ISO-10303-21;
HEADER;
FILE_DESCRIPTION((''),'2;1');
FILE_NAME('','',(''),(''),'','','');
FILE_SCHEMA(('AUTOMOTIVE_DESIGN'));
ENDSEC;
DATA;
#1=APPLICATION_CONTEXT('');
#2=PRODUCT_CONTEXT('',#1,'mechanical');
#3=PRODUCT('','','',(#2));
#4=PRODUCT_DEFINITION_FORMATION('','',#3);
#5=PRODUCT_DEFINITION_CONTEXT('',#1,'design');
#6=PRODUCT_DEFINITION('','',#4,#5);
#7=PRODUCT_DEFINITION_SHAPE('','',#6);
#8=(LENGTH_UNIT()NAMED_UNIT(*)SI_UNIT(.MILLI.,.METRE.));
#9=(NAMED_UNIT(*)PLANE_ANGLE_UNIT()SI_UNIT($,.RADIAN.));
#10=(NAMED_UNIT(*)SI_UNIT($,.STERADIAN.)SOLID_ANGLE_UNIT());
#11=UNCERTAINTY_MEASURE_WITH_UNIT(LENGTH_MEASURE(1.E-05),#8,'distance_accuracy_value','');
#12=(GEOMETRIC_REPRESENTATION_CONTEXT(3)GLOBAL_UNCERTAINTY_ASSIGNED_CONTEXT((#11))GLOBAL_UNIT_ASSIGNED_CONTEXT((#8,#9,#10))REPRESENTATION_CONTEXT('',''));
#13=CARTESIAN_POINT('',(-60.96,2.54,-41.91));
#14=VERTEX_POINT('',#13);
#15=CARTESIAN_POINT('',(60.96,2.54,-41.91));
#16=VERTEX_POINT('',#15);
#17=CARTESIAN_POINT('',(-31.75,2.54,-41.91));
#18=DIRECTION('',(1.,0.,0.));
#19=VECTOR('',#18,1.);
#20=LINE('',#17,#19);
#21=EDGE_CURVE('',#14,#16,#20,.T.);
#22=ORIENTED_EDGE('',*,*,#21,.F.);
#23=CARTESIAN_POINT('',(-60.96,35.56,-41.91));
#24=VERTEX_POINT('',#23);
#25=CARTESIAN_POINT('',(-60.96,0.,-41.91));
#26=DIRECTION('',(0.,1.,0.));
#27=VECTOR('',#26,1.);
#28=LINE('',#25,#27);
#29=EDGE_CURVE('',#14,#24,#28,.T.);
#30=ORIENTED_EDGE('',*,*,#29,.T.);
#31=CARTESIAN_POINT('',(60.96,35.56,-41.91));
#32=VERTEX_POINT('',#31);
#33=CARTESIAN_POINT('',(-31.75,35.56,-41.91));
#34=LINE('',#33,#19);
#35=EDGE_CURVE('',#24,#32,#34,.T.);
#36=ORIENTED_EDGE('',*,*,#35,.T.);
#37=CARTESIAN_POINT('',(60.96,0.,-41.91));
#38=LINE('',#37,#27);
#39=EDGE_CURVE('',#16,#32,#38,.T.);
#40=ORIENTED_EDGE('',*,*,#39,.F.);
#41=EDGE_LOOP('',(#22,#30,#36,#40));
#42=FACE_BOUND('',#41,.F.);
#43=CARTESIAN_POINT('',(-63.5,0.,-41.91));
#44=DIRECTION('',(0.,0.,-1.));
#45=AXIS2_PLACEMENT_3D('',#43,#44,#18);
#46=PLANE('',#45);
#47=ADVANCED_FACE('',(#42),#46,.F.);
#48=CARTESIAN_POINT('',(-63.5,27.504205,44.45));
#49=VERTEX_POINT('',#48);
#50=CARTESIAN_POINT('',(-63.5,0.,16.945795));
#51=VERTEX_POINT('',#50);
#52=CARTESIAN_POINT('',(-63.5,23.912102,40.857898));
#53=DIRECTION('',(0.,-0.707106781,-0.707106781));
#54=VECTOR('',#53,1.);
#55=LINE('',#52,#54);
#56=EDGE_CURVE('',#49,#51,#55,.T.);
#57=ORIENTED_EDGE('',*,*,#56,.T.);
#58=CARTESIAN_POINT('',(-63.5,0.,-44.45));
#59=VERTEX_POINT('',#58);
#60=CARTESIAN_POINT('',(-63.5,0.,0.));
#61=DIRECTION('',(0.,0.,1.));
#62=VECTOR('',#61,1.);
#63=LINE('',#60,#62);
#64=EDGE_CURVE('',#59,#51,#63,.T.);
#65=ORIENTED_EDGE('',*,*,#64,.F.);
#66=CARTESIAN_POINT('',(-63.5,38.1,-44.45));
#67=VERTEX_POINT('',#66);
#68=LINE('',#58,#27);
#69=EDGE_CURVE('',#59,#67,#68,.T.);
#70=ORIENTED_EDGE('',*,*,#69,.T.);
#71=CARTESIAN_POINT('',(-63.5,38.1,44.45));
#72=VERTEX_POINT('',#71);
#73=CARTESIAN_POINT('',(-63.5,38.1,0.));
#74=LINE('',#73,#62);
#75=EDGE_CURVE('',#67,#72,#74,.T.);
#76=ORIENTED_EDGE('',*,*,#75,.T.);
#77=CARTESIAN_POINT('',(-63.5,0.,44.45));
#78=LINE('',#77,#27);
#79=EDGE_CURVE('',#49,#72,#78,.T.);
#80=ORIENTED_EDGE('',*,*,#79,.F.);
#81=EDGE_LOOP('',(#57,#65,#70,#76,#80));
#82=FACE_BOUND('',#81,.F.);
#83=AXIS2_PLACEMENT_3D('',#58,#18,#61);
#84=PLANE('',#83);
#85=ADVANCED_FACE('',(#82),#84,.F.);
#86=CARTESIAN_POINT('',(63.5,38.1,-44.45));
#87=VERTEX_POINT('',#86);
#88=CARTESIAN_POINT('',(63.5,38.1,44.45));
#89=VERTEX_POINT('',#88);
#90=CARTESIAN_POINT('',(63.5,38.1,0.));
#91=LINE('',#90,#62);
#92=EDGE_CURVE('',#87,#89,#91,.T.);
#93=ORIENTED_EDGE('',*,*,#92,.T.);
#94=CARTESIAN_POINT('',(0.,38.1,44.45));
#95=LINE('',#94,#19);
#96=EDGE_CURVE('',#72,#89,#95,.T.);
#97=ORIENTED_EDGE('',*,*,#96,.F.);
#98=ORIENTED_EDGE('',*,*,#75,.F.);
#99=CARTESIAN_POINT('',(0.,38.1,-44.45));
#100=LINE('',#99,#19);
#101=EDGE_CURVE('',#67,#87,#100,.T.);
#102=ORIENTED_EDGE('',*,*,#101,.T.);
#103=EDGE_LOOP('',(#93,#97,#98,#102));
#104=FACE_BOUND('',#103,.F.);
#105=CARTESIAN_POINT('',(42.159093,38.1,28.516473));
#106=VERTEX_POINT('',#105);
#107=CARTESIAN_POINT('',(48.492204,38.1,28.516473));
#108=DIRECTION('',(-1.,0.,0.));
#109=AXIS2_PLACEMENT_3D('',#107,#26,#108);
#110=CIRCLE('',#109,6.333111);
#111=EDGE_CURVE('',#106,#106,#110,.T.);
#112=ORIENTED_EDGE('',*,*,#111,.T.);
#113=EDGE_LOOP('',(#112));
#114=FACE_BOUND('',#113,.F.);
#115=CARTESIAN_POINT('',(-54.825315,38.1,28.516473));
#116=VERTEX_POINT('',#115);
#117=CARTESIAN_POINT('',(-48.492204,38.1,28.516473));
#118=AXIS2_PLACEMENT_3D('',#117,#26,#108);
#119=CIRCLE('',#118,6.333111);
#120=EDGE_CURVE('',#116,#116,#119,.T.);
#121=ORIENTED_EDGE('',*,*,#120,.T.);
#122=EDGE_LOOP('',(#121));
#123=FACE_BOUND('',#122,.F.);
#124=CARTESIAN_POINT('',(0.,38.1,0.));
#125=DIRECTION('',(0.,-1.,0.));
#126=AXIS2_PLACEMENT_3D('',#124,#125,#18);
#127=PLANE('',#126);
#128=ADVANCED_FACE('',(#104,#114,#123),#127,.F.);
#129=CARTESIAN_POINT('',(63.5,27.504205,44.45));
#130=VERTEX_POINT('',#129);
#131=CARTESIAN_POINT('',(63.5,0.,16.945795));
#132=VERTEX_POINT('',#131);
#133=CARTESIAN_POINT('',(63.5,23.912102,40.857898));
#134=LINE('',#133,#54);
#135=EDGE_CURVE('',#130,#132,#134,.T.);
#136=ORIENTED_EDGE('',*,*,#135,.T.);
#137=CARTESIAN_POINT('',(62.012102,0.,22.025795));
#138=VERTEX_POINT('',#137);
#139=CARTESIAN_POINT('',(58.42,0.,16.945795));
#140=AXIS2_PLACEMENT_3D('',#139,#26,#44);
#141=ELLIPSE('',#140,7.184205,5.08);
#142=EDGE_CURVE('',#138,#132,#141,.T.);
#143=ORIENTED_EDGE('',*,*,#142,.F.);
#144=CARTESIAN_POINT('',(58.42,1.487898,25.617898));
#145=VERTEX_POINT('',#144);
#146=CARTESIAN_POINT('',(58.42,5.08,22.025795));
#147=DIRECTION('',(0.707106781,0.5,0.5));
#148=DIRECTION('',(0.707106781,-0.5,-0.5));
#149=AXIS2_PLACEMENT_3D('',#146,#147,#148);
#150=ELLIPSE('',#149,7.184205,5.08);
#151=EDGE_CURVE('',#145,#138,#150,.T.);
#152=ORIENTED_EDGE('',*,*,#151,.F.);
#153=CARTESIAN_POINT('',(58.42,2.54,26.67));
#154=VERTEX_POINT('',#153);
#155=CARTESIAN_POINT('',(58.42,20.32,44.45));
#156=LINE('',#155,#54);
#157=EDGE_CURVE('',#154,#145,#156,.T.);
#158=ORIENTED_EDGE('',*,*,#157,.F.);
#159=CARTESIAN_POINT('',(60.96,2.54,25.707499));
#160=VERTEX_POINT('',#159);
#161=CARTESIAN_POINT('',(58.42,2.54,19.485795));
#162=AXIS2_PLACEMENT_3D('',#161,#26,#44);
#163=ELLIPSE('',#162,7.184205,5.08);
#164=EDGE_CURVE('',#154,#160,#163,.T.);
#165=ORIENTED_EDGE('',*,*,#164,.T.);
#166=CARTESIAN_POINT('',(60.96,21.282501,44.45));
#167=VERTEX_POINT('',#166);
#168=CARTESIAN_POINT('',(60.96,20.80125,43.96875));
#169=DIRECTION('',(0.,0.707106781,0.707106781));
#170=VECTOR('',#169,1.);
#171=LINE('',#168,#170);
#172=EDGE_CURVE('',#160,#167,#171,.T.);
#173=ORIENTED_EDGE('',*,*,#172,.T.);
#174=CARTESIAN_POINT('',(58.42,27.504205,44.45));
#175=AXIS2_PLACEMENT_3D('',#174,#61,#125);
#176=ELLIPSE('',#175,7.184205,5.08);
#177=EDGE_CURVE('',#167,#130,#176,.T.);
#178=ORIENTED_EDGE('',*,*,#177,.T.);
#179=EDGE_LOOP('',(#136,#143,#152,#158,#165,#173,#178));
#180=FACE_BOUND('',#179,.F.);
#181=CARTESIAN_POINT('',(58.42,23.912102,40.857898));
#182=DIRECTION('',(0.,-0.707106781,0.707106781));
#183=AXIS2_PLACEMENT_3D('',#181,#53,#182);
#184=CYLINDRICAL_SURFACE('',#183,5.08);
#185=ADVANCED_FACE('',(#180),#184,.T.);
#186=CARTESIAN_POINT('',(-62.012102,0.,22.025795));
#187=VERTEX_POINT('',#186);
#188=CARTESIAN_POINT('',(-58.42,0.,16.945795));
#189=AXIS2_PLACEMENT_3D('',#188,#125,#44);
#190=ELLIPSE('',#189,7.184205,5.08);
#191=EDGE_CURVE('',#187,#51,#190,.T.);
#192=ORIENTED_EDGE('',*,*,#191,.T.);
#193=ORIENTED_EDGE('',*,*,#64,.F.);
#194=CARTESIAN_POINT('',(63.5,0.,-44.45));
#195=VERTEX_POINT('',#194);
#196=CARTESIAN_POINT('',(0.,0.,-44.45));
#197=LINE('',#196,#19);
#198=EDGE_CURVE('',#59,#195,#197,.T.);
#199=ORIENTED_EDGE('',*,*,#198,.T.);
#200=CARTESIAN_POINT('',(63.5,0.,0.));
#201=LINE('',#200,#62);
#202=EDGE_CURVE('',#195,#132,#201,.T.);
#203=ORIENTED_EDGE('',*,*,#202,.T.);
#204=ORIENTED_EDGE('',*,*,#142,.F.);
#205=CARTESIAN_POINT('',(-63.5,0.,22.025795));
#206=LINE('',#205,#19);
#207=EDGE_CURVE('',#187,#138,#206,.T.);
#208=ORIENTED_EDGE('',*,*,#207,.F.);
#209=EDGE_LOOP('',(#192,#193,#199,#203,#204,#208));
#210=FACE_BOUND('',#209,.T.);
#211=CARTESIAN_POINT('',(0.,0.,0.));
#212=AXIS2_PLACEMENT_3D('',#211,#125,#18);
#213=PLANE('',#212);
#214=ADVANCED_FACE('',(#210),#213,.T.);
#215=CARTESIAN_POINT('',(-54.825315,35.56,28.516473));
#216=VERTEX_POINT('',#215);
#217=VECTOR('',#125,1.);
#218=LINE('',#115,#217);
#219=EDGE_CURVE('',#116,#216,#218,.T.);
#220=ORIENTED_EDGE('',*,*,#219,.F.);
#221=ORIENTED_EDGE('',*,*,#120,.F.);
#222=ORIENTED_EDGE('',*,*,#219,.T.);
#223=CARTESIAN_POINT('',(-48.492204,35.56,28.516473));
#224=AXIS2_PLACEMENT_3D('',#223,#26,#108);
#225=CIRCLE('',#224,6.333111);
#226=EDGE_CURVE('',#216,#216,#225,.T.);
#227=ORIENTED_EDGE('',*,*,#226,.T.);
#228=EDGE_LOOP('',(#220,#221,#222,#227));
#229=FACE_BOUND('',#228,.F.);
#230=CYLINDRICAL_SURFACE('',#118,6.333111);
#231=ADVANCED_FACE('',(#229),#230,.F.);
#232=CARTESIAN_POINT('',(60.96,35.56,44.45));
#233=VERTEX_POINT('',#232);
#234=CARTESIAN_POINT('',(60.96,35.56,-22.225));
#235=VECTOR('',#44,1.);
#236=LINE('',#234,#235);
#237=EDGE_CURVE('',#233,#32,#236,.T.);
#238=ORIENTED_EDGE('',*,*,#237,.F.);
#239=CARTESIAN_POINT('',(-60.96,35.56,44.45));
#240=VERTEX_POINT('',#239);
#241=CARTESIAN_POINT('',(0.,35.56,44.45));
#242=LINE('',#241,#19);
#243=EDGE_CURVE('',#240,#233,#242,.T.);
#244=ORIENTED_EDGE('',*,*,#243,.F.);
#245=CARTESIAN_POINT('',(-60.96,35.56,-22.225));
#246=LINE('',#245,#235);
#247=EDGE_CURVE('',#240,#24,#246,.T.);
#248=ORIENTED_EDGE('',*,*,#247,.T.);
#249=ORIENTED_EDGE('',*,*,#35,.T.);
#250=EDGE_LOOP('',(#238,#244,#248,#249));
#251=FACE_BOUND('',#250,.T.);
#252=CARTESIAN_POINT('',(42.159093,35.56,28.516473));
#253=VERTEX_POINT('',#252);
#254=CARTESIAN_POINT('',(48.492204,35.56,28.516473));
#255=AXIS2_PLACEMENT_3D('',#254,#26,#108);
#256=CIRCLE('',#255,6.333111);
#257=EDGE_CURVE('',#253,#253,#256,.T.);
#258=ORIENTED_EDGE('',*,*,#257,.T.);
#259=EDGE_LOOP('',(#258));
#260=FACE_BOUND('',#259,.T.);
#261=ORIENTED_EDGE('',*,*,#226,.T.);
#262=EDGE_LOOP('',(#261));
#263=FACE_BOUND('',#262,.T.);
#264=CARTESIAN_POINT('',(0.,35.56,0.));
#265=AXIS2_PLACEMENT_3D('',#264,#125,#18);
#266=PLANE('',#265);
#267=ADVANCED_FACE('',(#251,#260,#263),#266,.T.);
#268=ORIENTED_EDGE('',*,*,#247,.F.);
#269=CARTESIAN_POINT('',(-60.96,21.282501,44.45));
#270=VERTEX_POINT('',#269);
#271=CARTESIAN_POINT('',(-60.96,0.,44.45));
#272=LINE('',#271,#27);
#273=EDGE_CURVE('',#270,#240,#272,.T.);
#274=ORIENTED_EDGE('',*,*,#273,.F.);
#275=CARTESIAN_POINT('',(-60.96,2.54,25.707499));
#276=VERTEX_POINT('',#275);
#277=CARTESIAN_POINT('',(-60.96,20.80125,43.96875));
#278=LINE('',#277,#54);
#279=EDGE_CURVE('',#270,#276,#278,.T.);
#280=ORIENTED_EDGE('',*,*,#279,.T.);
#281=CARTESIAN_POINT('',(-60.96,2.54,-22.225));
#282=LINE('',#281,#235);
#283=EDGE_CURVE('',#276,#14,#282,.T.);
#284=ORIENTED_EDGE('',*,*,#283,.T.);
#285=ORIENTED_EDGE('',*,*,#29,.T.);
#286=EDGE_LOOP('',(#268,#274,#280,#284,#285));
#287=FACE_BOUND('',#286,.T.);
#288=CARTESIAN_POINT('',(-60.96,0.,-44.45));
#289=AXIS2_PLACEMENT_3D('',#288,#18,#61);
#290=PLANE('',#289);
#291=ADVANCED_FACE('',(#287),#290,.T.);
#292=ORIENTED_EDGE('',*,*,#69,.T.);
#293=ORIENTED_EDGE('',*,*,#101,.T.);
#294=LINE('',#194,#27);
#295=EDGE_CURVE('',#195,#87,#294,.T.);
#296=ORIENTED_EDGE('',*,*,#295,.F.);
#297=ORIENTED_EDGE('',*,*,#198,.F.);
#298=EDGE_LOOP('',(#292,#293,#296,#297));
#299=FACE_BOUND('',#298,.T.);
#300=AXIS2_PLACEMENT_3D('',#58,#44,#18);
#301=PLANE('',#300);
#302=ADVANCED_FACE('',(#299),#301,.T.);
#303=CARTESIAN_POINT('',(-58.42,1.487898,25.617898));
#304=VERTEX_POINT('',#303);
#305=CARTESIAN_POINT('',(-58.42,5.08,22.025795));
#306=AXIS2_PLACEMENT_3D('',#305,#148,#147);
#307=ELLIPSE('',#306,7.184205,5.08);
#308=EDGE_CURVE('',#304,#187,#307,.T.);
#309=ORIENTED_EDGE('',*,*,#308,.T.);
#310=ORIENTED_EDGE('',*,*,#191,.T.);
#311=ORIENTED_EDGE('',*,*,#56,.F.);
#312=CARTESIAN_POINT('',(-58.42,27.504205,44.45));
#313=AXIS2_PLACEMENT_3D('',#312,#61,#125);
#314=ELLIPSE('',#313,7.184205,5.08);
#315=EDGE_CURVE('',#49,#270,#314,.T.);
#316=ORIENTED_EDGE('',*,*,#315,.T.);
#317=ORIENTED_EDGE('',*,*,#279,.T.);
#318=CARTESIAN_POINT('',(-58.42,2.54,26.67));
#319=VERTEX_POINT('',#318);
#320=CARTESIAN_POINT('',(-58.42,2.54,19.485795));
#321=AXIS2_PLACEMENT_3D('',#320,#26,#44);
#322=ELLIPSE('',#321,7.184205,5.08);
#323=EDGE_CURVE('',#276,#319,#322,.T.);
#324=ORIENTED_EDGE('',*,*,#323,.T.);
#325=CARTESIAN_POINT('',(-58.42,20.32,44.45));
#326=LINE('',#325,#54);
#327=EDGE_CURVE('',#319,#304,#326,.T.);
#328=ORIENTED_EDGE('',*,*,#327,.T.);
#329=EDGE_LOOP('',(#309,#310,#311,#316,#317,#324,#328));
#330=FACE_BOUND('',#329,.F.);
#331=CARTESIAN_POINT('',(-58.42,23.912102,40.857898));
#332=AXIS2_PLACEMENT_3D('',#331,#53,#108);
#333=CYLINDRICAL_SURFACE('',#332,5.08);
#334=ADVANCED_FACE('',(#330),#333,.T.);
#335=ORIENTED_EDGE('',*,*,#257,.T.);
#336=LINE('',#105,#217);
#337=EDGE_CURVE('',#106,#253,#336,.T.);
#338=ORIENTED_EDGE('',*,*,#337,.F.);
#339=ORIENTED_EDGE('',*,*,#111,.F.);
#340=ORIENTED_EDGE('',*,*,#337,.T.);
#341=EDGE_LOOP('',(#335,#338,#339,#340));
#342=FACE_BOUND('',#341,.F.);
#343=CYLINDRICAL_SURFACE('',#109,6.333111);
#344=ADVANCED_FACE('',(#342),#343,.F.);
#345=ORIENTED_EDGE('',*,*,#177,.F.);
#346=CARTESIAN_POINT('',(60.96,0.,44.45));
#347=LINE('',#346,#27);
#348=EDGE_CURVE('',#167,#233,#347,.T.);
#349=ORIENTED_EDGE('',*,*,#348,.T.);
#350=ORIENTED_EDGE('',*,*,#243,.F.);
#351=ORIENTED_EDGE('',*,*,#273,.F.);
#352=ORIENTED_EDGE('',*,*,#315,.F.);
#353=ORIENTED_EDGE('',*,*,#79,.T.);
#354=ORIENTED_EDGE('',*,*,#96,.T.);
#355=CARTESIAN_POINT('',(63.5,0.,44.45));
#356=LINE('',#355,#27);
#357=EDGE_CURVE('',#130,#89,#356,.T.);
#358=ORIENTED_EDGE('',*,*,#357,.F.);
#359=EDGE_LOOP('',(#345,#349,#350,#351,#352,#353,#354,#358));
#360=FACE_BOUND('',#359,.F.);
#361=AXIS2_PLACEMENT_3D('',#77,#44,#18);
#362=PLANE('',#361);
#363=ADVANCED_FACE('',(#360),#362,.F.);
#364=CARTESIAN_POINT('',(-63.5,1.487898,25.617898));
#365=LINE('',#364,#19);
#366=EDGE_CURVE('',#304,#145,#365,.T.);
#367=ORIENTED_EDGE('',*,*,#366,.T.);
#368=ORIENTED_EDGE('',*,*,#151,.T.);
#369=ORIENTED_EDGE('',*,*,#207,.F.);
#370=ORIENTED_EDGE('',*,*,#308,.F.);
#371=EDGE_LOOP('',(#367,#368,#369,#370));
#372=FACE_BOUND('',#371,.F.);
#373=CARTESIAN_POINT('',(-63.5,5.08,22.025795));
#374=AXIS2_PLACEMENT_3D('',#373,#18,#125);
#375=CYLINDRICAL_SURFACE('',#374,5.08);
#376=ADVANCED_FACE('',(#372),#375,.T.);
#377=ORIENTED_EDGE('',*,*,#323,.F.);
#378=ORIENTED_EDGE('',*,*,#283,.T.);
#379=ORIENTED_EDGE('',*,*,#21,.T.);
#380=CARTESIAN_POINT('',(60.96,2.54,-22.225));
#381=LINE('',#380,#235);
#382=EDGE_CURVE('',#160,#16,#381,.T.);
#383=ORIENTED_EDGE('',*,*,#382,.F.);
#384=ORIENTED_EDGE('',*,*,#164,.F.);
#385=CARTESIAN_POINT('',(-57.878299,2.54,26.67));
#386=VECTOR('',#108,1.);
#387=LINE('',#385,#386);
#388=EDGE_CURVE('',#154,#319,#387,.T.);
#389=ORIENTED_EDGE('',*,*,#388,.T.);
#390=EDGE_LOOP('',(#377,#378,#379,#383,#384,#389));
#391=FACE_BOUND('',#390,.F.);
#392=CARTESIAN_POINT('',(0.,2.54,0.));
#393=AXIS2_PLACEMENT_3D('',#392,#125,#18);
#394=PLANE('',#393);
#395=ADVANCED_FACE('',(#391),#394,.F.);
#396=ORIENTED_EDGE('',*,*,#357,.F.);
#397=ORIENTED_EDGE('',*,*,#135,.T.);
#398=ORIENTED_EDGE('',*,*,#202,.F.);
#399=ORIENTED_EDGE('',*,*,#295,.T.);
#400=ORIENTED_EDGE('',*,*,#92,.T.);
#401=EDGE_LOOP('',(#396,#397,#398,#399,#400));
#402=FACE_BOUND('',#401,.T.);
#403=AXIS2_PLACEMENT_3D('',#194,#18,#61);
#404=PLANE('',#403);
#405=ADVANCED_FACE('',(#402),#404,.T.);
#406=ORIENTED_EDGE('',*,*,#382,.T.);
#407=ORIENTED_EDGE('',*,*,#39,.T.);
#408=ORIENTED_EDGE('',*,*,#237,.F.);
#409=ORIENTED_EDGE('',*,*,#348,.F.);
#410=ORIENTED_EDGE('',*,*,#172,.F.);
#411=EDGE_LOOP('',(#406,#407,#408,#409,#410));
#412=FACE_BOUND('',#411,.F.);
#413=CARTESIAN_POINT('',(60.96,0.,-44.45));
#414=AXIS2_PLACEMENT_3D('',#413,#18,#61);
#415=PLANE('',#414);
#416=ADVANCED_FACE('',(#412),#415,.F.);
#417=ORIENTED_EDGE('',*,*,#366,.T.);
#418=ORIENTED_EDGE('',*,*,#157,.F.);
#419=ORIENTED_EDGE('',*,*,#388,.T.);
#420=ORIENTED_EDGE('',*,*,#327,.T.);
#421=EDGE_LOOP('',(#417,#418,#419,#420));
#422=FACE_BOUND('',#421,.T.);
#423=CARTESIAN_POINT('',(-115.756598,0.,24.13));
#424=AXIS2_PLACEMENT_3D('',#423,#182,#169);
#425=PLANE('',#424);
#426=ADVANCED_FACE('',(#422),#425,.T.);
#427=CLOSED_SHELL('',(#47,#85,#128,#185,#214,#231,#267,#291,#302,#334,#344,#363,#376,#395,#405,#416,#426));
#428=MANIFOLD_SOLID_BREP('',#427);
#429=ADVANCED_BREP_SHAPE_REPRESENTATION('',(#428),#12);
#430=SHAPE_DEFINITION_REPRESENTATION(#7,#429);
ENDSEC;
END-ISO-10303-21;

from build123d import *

# Parameters (mm, degrees)
F0_W        = 127
F0_H        = 88.9
F1_DEPTH    = 38.1
F2_T        = -2.54
F3_T1_DEPTH = 231.5131966309
F4_R        = 5.08
F5_R        = 6.333111045
F6_DEPTH    = 25.4


# Not quite as in the source:
# - a fillet or chamfer that OpenCascade refuses, or shapes differently, is made with other operations: its cross-section is extruded or revolved along the edge and cut away or added


with BuildPart() as f1:
    # F0 (on Front) → F1 (new body)
    with BuildSketch(Plane.XZ):
        Rectangle(F0_W, F0_H)
    extrude(amount=-F1_DEPTH)

    # F2
    f2_openings = [f1.faces().sort_by_distance(p)[0] for p in [
        (0, 19.05, 44.45),
    ]]
    offset(amount=F2_T, openings=f2_openings)

    # F3: chamfer of 20.32 on 1 edges, made by hand

    # F3_s2 → F3_t1 (cut)
    with BuildSketch(Plane.YZ.offset(-115.7565983155)):
        Polygon((0, 24.13), (20.32, 44.45), (0, 44.45), align=None)
    extrude(amount=F3_T1_DEPTH, mode=Mode.SUBTRACT)

    # F4
    f4_edges = [f1.edges().sort_by_distance(p)[0] for p in [
        (-63.5, 10.16, 34.29),
        (63.5, 10.16, 34.29),
        (0, 0, 24.13),
    ]]
    fillet(f4_edges, radius=F4_R)

    # F5 (on face) → F6 (cut)
    with BuildSketch(Plane(origin=(0, 38.1, 0), x_dir=(-1, 0, 0), z_dir=(0, 1, 0))):
        with Locations((-48.4922043979, 28.5164732486)):
            Circle(F5_R)
        with Locations((48.4922043979, 28.5164732486)):
            Circle(F5_R)
    extrude(amount=-F6_DEPTH, mode=Mode.SUBTRACT)


solid = f1.part
